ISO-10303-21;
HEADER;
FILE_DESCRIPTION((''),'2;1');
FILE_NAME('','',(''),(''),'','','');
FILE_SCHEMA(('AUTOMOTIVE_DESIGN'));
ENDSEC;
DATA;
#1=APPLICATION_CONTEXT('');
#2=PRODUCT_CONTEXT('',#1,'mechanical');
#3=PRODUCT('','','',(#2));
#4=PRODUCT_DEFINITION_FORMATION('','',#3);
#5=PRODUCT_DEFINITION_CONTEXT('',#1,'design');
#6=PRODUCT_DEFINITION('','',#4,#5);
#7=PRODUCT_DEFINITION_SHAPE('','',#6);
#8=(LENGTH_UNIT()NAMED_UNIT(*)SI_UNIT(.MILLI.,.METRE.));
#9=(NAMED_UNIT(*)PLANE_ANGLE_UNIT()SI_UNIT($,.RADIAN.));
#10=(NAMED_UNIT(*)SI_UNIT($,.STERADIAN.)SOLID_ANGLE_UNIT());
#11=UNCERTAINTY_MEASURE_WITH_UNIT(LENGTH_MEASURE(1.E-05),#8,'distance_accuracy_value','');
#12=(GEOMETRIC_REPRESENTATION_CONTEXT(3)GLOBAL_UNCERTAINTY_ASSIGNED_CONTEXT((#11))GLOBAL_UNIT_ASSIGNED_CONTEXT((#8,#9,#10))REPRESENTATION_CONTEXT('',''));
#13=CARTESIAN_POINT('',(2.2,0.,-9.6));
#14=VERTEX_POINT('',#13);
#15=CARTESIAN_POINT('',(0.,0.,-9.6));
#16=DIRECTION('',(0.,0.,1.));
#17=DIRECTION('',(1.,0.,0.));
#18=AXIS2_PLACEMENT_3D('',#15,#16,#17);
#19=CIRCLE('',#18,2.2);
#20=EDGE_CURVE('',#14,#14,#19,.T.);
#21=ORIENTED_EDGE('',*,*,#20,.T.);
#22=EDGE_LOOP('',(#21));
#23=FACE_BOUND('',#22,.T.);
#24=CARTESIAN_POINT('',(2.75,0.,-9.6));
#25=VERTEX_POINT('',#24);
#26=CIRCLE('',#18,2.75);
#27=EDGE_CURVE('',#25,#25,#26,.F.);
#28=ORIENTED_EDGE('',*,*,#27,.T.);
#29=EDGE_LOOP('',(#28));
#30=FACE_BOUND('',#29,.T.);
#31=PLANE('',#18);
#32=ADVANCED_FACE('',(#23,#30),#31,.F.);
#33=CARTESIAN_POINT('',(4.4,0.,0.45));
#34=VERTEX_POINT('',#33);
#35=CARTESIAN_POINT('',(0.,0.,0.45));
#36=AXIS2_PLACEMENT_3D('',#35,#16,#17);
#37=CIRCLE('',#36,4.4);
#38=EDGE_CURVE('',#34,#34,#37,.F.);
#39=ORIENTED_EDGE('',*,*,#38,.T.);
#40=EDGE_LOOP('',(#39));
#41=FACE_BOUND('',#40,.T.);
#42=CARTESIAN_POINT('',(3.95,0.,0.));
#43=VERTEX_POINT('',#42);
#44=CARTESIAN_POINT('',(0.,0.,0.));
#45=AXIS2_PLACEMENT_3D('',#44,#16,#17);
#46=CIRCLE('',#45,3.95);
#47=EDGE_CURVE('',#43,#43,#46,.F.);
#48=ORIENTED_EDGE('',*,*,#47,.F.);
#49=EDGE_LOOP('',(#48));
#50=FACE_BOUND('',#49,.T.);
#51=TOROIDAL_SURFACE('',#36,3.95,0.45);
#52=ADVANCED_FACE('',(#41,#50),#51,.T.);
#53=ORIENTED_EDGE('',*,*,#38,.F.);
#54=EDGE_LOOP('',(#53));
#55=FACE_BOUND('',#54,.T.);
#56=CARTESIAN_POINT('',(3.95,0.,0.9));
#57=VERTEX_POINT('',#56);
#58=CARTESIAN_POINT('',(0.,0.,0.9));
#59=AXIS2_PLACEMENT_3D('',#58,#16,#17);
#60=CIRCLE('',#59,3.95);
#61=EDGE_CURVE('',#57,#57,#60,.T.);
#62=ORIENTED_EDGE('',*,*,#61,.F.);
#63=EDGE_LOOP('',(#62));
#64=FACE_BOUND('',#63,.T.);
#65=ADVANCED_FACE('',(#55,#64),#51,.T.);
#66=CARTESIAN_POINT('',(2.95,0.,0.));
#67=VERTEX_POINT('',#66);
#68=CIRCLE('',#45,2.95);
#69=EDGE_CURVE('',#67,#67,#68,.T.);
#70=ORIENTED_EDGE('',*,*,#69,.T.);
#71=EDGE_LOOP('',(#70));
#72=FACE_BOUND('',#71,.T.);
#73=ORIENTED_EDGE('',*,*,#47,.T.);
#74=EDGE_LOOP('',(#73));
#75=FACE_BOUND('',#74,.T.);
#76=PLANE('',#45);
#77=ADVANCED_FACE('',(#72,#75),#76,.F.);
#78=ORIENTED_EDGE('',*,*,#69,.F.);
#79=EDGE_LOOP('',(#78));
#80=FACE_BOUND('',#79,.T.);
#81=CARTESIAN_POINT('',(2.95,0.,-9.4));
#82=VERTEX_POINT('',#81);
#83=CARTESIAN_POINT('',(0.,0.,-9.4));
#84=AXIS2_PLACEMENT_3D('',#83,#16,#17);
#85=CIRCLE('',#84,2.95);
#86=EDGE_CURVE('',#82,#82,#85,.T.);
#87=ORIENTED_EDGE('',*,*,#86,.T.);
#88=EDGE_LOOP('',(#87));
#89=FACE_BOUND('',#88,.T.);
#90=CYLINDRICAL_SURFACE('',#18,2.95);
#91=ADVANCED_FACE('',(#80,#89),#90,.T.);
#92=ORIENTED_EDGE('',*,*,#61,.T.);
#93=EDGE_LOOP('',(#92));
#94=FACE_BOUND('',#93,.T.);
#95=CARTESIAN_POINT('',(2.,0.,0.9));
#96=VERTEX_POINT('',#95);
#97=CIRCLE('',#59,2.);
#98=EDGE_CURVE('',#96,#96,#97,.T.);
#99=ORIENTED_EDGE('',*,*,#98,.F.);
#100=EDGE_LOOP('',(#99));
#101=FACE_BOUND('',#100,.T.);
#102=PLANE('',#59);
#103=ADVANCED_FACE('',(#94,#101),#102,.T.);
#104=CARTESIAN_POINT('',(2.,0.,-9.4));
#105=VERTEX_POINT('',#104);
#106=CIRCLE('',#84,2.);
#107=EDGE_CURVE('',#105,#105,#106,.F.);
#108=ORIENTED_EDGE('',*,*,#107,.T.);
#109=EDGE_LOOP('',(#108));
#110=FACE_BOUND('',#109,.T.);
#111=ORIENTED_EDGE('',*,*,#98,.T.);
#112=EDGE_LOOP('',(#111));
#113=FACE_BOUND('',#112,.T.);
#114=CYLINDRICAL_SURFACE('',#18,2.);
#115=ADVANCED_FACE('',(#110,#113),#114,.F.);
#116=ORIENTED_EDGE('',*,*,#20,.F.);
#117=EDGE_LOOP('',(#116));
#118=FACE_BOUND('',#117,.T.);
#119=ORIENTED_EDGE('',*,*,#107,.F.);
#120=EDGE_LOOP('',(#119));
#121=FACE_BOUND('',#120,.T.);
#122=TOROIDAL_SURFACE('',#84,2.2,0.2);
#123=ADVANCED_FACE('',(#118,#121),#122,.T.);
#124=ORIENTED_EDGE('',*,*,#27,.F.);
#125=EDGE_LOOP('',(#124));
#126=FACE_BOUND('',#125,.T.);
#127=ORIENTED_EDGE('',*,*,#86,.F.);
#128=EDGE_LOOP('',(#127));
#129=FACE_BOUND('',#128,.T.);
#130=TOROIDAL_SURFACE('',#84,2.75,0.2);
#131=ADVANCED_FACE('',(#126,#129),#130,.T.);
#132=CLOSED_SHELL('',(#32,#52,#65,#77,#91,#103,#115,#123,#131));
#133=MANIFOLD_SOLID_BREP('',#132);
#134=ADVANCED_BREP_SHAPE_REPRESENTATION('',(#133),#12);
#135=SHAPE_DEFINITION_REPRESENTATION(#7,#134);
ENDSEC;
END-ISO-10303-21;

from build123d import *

# Parameters (mm, degrees)
SKETCH_1_R      = 2.95
SKETCH_1_R_2    = 2
EXTRUDE_1_DEPTH = 9.6
EXTRUDE_START   = 0.9
SKETCH_2_R      = 4.4
SKETCH_2_R_2    = 2
EXTRUDE_2_DEPTH = 0.9
FILLET_1_R      = 0.45
FILLET_2_R      = 0.2


with BuildPart() as part:
    # 草图1 → 凸台-拉伸1 (new body)
    with BuildSketch(Plane.XY):
        Circle(SKETCH_1_R)
        Circle(SKETCH_1_R_2, mode=Mode.SUBTRACT)
    extrude(amount=-EXTRUDE_1_DEPTH)

    # 草图2 → 凸台-拉伸2 (add)
    with BuildSketch(Plane.XY.offset(EXTRUDE_START)):
        Circle(SKETCH_2_R)
        Circle(SKETCH_2_R_2, mode=Mode.SUBTRACT)
    extrude(amount=-EXTRUDE_2_DEPTH)

    # 圆角1
    fillet_1_edges = [part.edges().sort_by_distance(p)[0] for p in [
        (-4.4, 0, 0),
        (-4.4, 0, 0.9),
    ]]
    fillet(fillet_1_edges, radius=FILLET_1_R - 0.0001)  # a hair under: the kernel refuses the full size

    # 圆角2
    fillet_2_edges = [part.edges().sort_by_distance(p)[0] for p in [
        (-2.95, 0, -9.6),
        (-2, 0, -9.6),
    ]]
    fillet(fillet_2_edges, radius=FILLET_2_R)


solid = part.part
